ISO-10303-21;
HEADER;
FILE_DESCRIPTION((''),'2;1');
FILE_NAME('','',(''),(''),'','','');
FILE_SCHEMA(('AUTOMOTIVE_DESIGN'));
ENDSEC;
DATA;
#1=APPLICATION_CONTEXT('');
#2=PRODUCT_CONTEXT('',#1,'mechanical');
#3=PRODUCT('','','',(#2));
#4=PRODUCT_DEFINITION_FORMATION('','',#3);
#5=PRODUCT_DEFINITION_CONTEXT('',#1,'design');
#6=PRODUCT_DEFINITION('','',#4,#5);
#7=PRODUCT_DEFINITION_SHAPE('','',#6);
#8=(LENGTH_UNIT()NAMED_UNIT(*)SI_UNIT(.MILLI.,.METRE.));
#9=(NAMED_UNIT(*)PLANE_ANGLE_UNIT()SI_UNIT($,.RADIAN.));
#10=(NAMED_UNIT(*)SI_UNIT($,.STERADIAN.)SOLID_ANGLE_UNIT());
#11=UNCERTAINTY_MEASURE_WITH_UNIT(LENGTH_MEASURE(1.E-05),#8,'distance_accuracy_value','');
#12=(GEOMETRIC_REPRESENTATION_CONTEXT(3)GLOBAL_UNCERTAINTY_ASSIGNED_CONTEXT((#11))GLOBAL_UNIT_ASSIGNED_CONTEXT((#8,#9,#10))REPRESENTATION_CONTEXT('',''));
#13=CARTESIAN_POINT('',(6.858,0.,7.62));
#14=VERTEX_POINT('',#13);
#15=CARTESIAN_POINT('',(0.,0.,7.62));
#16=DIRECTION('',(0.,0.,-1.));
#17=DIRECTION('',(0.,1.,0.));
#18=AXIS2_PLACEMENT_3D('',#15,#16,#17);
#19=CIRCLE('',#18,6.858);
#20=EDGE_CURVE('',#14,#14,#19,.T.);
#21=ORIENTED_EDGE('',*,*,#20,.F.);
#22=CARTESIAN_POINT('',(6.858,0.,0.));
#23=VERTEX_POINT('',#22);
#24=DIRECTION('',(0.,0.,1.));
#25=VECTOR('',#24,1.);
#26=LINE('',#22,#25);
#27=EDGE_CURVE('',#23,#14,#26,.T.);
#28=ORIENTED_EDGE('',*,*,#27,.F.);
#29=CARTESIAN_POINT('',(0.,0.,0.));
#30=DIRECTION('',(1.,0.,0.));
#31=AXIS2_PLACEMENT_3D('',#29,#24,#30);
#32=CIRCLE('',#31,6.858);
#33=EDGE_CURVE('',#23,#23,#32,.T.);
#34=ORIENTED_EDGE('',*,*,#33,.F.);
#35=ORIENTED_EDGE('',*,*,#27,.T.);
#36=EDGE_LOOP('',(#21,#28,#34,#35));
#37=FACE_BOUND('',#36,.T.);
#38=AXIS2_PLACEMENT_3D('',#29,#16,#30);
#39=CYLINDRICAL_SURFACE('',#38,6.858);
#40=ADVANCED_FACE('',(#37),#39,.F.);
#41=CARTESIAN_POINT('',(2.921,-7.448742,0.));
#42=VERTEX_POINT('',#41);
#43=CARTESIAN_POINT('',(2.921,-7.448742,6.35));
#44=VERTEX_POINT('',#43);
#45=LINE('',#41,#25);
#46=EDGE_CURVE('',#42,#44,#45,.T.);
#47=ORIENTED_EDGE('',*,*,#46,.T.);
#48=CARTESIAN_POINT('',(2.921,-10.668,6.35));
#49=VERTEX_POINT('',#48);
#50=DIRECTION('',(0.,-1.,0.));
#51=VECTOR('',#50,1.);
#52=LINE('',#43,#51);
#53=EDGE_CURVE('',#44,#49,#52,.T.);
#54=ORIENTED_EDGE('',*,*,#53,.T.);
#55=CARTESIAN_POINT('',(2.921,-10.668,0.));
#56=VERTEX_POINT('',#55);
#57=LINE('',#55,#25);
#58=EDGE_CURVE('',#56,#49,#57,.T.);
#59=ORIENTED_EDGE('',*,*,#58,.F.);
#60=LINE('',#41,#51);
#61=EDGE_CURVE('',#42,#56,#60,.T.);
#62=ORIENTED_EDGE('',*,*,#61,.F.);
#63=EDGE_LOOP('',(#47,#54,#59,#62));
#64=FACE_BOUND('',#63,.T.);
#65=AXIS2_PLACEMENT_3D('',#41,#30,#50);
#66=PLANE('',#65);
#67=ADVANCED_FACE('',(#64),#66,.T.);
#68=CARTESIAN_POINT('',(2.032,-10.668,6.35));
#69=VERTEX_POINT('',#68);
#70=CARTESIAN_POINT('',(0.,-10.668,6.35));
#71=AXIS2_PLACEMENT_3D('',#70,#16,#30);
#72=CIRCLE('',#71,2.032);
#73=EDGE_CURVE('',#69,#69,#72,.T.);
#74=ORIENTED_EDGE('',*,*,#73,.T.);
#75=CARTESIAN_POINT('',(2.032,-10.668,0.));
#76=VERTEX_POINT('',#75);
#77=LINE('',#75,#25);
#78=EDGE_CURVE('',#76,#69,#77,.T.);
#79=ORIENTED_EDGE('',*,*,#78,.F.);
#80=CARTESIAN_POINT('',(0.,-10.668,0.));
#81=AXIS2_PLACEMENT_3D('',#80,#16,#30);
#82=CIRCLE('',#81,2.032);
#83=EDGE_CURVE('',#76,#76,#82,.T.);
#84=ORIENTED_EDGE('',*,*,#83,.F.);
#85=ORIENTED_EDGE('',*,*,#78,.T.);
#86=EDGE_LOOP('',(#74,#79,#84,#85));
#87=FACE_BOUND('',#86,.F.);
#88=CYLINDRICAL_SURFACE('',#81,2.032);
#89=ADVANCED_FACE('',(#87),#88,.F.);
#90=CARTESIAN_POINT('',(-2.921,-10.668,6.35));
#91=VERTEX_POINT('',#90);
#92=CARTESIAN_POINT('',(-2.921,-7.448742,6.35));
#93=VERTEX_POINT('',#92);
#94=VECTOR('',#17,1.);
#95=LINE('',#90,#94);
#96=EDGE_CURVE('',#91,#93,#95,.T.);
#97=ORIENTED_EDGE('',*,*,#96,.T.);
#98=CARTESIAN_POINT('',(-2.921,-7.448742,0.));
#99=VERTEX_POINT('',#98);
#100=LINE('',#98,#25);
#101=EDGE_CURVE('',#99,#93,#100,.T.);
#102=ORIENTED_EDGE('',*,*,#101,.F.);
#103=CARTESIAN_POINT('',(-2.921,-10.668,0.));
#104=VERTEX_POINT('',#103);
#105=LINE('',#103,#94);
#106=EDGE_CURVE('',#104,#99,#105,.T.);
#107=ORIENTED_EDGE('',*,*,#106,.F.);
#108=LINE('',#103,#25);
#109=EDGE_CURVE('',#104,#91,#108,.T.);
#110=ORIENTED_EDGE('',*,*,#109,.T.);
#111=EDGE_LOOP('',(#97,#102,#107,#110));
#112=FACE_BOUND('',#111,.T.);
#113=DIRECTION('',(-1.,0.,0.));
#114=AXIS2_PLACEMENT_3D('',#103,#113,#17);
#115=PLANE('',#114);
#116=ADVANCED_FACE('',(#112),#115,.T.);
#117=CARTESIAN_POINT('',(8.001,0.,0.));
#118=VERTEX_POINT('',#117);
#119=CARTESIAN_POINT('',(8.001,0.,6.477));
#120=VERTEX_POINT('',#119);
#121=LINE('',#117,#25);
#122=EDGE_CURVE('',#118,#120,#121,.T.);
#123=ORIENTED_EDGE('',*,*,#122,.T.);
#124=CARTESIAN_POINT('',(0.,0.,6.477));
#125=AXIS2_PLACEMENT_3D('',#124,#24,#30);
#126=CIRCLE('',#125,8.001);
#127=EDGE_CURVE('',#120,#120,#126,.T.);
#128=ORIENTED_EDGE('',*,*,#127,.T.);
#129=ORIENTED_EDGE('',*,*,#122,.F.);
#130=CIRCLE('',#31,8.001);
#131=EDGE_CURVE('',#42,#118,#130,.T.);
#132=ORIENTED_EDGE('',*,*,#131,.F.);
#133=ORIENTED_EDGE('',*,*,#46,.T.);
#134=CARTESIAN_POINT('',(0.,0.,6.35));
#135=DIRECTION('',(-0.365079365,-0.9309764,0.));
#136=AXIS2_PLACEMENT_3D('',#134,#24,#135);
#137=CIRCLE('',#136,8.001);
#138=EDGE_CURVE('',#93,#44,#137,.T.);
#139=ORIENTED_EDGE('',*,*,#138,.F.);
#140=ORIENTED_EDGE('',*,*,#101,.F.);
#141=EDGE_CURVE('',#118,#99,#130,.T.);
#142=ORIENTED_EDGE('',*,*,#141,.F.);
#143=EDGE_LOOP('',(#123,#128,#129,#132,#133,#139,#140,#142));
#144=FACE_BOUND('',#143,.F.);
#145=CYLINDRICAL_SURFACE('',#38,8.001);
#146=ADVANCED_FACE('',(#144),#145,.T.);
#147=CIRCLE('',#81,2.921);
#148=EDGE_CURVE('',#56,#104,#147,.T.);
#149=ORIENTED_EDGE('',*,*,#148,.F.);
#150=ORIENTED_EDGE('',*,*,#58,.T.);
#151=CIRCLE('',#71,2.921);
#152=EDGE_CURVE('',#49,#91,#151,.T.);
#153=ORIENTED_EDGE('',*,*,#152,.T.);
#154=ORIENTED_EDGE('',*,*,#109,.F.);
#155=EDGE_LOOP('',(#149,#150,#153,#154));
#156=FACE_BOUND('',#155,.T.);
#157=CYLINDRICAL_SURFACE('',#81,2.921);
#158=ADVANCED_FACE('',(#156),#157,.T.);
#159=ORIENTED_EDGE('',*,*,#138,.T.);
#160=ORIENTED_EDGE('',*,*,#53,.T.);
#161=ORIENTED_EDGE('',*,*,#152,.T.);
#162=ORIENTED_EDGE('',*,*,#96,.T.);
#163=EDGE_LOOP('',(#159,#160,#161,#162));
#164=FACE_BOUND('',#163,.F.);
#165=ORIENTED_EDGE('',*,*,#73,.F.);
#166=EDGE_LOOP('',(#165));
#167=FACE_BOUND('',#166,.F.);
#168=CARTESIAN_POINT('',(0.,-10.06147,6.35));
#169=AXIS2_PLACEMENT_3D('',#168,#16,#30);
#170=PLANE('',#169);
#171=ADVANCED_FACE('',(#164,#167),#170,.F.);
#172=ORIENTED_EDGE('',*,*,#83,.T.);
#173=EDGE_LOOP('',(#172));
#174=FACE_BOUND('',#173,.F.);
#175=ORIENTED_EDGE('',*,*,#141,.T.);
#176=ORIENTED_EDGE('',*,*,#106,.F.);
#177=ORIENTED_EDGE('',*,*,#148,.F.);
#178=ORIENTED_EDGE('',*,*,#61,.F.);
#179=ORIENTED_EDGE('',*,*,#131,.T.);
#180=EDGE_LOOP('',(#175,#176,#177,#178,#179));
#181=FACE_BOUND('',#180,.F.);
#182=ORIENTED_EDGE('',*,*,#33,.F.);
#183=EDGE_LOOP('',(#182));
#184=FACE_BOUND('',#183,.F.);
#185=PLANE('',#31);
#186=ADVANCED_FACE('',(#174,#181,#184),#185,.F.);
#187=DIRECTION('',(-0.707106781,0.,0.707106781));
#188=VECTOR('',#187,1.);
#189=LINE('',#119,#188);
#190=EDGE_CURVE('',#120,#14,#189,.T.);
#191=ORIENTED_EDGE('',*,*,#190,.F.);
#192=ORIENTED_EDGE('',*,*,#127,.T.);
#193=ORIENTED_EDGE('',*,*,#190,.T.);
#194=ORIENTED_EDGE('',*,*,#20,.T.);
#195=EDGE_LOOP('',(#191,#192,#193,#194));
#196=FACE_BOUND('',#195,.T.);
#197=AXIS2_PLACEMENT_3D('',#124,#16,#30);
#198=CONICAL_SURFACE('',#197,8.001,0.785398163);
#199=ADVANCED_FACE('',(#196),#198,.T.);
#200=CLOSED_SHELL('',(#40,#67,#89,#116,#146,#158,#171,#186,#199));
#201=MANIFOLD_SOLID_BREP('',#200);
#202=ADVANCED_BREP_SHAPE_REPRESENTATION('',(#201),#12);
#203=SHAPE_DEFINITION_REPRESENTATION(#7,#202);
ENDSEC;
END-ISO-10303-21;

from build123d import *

# Parameters (mm, degrees)
F0_R     = 8.001
F0_R_2   = 6.858
F1_DEPTH = 7.747
F3_R     = 2.032
F4_DEPTH = 6.35


# Not quite as in the source:
# - a fillet or chamfer that OpenCascade refuses, or shapes differently, is made with other operations: its cross-section is extruded or revolved along the edge and cut away or added


with BuildPart() as f1:
    # F0 (on Top) → F1 (new body)
    with BuildSketch(Plane.XY):
        Circle(F0_R)
        Circle(F0_R_2, mode=Mode.SUBTRACT)
    extrude(amount=F1_DEPTH)

    # F2: chamfer of 1.27 on 1 edges, made by hand

    # F2_s1 → F2_t2 (revolve, cut)
    with BuildSketch(Plane.XZ):
        Polygon((8.001, 6.477), (6.731, 7.747), (8.001, 7.747), align=None)
    revolve(axis=Axis((0, 0, 7.747), (0, 0, 1)), mode=Mode.SUBTRACT)

    # F3 (on face) → F4 (join)
    with BuildSketch(Plane(origin=(0, 0, 0), x_dir=(1, 0, 0), z_dir=(0, 0, -1))):
        with BuildLine():
            Line((2.921, 7.4487421757), (2.921, 10.668))
            ThreePointArc((2.921, 10.668), (0, 13.589), (-2.921, 10.668))
            Line((-2.921, 10.668), (-2.921, 7.4487421757))
            ThreePointArc((-2.921, 7.4487421757), (0, 8.001), (2.921, 7.4487421757))
        make_face()
        with Locations((0, 10.668)):
            Circle(F3_R, mode=Mode.SUBTRACT)
    extrude(amount=-F4_DEPTH)


solid = f1.part
